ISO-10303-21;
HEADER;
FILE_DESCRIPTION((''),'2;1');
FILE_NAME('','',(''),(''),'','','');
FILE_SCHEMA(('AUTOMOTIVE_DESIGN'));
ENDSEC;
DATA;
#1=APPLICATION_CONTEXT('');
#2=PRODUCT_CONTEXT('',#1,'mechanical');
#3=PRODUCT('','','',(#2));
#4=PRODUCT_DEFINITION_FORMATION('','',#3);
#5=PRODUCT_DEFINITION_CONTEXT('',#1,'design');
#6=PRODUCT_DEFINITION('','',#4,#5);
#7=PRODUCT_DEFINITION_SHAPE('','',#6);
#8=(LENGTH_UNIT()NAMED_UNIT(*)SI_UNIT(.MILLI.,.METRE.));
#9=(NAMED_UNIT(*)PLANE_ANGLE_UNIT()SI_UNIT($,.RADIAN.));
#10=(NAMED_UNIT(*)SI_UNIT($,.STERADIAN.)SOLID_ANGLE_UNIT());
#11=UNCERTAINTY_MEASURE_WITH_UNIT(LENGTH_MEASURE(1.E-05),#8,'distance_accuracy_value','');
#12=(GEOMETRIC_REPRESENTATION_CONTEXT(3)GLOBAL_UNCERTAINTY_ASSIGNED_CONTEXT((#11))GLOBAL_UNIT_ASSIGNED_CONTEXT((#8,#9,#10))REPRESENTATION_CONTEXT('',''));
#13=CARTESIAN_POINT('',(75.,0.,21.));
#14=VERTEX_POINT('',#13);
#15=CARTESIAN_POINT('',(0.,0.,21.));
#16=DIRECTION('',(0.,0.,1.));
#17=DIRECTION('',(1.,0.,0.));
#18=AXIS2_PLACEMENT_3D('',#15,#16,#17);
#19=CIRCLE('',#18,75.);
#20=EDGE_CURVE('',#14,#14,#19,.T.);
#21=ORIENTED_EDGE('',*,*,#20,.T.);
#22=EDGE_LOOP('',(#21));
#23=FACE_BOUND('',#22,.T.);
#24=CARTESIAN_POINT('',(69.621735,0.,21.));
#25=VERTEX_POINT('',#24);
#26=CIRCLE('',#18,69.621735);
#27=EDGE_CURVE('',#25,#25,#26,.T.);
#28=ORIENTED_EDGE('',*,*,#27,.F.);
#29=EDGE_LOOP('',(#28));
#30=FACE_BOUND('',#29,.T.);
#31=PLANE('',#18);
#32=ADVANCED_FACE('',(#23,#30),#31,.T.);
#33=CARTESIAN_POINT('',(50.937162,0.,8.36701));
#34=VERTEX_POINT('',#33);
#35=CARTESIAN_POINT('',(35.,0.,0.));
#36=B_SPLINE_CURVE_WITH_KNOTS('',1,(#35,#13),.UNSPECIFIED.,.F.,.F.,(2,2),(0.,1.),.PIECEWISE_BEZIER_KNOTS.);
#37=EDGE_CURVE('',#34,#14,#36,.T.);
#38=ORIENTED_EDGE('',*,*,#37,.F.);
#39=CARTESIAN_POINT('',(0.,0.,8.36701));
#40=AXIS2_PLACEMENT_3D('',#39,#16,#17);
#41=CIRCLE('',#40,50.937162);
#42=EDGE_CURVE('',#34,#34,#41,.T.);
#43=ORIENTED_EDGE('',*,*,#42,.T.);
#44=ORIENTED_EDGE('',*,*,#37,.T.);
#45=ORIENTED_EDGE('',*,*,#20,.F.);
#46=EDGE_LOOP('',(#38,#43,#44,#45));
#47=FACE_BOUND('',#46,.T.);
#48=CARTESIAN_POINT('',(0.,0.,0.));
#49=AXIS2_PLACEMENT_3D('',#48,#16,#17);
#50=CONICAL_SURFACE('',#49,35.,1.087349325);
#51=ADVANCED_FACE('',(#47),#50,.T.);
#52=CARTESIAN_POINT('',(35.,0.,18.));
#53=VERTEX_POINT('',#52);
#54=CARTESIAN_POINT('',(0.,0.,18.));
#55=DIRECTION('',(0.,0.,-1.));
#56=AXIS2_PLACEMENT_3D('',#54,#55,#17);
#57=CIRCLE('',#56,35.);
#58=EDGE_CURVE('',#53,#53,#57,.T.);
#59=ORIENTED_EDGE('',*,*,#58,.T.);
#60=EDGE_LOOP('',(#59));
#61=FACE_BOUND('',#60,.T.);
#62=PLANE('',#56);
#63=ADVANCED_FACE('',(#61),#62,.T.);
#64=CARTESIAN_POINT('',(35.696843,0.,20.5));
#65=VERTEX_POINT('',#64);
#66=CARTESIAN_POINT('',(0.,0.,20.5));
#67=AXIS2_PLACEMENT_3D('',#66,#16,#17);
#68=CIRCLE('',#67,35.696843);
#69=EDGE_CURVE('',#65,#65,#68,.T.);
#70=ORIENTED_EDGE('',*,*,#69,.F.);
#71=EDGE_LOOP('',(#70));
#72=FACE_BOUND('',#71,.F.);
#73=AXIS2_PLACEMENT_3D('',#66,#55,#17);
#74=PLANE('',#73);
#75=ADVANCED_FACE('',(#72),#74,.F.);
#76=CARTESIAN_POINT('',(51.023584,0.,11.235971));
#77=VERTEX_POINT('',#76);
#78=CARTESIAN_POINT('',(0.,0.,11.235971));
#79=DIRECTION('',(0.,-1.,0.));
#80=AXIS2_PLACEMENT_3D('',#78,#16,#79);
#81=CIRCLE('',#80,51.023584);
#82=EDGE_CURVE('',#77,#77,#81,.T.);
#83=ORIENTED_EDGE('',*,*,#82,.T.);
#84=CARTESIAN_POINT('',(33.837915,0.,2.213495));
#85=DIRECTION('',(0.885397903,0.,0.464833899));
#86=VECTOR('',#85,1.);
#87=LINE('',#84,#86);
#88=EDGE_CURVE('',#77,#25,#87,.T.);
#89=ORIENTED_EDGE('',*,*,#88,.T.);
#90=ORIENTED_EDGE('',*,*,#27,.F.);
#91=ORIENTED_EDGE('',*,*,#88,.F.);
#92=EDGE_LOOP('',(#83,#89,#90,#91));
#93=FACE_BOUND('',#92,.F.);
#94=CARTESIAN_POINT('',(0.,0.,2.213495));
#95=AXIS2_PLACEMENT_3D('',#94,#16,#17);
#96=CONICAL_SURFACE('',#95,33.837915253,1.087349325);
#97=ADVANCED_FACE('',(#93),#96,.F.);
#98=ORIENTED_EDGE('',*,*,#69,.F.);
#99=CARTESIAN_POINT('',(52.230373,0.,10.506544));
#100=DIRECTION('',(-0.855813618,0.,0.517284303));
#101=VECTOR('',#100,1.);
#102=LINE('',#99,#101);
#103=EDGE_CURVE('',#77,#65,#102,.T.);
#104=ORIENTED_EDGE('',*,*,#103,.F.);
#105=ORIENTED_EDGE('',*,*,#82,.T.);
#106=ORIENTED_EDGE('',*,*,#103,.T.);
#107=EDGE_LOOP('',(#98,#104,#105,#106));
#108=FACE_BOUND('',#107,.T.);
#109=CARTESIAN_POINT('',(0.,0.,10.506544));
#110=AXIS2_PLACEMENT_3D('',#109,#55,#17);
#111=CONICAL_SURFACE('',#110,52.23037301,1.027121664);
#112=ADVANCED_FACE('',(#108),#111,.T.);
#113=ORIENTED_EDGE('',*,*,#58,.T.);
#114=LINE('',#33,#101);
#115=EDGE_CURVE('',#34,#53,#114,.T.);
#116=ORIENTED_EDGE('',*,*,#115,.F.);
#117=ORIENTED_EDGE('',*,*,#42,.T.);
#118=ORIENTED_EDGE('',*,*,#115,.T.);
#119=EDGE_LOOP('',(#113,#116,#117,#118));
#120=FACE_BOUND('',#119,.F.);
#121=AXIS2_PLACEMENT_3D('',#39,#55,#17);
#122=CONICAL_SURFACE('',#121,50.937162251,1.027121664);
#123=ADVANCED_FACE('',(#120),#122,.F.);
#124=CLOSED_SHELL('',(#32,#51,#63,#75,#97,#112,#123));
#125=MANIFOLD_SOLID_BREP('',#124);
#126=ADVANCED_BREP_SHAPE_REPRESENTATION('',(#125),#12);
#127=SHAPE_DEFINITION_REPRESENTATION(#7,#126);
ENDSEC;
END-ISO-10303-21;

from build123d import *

# Parameters (mm, degrees)
F0_R     = 35
F2_R     = 75
F4_R     = 35
F5_DEPTH = 18
F7_T     = -2.5


# Not quite as in the source:
# - a fillet or chamfer that OpenCascade refuses, or shapes differently, is made with other operations: its cross-section is extruded or revolved along the edge and cut away or added


with BuildPart() as f3:
    # F0 (on Top) → F3 section 0
    with BuildSketch(Plane.XY):
        Circle(F0_R)
    # F2 (on offset) → F3 section 1
    with BuildSketch(Plane.XY.offset(21)):
        Circle(F2_R)
    loft()

    # F4 (on face) → F5 (cut)
    with BuildSketch(Plane(origin=(0, 0, 0), x_dir=(1, 0, 0), z_dir=(0, 0, -1))):
        Circle(F4_R)
    extrude(amount=-F5_DEPTH, mode=Mode.SUBTRACT)

    # F6: chamfer of 18 on 1 edges, made by hand


with BuildPart() as f6_tool2:
    # F6_s3 → F6_t4 (revolve)
    with BuildSketch(Plane.XZ):
        Polygon((50.9371622511, 8.3670101818), (35, 18), (35, 0), align=None)
    revolve(axis=Axis((0, 0, 0), (0, 0, 1)))

    split(bisect_by=Plane.XY.offset(18), keep=Keep.BOTTOM)


with BuildPart() as f3_1:
    add(f3.part)

    # F6_t1: cut F6_tool2
    add(f6_tool2.part, mode=Mode.SUBTRACT)

    # F7
    f7_openings = [f3_1.faces().sort_by_distance(p)[0] for p in [
        (0, 0, 21),
    ]]
    offset(amount=F7_T, openings=f7_openings, kind=Kind.INTERSECTION)


solid = f3_1.part
